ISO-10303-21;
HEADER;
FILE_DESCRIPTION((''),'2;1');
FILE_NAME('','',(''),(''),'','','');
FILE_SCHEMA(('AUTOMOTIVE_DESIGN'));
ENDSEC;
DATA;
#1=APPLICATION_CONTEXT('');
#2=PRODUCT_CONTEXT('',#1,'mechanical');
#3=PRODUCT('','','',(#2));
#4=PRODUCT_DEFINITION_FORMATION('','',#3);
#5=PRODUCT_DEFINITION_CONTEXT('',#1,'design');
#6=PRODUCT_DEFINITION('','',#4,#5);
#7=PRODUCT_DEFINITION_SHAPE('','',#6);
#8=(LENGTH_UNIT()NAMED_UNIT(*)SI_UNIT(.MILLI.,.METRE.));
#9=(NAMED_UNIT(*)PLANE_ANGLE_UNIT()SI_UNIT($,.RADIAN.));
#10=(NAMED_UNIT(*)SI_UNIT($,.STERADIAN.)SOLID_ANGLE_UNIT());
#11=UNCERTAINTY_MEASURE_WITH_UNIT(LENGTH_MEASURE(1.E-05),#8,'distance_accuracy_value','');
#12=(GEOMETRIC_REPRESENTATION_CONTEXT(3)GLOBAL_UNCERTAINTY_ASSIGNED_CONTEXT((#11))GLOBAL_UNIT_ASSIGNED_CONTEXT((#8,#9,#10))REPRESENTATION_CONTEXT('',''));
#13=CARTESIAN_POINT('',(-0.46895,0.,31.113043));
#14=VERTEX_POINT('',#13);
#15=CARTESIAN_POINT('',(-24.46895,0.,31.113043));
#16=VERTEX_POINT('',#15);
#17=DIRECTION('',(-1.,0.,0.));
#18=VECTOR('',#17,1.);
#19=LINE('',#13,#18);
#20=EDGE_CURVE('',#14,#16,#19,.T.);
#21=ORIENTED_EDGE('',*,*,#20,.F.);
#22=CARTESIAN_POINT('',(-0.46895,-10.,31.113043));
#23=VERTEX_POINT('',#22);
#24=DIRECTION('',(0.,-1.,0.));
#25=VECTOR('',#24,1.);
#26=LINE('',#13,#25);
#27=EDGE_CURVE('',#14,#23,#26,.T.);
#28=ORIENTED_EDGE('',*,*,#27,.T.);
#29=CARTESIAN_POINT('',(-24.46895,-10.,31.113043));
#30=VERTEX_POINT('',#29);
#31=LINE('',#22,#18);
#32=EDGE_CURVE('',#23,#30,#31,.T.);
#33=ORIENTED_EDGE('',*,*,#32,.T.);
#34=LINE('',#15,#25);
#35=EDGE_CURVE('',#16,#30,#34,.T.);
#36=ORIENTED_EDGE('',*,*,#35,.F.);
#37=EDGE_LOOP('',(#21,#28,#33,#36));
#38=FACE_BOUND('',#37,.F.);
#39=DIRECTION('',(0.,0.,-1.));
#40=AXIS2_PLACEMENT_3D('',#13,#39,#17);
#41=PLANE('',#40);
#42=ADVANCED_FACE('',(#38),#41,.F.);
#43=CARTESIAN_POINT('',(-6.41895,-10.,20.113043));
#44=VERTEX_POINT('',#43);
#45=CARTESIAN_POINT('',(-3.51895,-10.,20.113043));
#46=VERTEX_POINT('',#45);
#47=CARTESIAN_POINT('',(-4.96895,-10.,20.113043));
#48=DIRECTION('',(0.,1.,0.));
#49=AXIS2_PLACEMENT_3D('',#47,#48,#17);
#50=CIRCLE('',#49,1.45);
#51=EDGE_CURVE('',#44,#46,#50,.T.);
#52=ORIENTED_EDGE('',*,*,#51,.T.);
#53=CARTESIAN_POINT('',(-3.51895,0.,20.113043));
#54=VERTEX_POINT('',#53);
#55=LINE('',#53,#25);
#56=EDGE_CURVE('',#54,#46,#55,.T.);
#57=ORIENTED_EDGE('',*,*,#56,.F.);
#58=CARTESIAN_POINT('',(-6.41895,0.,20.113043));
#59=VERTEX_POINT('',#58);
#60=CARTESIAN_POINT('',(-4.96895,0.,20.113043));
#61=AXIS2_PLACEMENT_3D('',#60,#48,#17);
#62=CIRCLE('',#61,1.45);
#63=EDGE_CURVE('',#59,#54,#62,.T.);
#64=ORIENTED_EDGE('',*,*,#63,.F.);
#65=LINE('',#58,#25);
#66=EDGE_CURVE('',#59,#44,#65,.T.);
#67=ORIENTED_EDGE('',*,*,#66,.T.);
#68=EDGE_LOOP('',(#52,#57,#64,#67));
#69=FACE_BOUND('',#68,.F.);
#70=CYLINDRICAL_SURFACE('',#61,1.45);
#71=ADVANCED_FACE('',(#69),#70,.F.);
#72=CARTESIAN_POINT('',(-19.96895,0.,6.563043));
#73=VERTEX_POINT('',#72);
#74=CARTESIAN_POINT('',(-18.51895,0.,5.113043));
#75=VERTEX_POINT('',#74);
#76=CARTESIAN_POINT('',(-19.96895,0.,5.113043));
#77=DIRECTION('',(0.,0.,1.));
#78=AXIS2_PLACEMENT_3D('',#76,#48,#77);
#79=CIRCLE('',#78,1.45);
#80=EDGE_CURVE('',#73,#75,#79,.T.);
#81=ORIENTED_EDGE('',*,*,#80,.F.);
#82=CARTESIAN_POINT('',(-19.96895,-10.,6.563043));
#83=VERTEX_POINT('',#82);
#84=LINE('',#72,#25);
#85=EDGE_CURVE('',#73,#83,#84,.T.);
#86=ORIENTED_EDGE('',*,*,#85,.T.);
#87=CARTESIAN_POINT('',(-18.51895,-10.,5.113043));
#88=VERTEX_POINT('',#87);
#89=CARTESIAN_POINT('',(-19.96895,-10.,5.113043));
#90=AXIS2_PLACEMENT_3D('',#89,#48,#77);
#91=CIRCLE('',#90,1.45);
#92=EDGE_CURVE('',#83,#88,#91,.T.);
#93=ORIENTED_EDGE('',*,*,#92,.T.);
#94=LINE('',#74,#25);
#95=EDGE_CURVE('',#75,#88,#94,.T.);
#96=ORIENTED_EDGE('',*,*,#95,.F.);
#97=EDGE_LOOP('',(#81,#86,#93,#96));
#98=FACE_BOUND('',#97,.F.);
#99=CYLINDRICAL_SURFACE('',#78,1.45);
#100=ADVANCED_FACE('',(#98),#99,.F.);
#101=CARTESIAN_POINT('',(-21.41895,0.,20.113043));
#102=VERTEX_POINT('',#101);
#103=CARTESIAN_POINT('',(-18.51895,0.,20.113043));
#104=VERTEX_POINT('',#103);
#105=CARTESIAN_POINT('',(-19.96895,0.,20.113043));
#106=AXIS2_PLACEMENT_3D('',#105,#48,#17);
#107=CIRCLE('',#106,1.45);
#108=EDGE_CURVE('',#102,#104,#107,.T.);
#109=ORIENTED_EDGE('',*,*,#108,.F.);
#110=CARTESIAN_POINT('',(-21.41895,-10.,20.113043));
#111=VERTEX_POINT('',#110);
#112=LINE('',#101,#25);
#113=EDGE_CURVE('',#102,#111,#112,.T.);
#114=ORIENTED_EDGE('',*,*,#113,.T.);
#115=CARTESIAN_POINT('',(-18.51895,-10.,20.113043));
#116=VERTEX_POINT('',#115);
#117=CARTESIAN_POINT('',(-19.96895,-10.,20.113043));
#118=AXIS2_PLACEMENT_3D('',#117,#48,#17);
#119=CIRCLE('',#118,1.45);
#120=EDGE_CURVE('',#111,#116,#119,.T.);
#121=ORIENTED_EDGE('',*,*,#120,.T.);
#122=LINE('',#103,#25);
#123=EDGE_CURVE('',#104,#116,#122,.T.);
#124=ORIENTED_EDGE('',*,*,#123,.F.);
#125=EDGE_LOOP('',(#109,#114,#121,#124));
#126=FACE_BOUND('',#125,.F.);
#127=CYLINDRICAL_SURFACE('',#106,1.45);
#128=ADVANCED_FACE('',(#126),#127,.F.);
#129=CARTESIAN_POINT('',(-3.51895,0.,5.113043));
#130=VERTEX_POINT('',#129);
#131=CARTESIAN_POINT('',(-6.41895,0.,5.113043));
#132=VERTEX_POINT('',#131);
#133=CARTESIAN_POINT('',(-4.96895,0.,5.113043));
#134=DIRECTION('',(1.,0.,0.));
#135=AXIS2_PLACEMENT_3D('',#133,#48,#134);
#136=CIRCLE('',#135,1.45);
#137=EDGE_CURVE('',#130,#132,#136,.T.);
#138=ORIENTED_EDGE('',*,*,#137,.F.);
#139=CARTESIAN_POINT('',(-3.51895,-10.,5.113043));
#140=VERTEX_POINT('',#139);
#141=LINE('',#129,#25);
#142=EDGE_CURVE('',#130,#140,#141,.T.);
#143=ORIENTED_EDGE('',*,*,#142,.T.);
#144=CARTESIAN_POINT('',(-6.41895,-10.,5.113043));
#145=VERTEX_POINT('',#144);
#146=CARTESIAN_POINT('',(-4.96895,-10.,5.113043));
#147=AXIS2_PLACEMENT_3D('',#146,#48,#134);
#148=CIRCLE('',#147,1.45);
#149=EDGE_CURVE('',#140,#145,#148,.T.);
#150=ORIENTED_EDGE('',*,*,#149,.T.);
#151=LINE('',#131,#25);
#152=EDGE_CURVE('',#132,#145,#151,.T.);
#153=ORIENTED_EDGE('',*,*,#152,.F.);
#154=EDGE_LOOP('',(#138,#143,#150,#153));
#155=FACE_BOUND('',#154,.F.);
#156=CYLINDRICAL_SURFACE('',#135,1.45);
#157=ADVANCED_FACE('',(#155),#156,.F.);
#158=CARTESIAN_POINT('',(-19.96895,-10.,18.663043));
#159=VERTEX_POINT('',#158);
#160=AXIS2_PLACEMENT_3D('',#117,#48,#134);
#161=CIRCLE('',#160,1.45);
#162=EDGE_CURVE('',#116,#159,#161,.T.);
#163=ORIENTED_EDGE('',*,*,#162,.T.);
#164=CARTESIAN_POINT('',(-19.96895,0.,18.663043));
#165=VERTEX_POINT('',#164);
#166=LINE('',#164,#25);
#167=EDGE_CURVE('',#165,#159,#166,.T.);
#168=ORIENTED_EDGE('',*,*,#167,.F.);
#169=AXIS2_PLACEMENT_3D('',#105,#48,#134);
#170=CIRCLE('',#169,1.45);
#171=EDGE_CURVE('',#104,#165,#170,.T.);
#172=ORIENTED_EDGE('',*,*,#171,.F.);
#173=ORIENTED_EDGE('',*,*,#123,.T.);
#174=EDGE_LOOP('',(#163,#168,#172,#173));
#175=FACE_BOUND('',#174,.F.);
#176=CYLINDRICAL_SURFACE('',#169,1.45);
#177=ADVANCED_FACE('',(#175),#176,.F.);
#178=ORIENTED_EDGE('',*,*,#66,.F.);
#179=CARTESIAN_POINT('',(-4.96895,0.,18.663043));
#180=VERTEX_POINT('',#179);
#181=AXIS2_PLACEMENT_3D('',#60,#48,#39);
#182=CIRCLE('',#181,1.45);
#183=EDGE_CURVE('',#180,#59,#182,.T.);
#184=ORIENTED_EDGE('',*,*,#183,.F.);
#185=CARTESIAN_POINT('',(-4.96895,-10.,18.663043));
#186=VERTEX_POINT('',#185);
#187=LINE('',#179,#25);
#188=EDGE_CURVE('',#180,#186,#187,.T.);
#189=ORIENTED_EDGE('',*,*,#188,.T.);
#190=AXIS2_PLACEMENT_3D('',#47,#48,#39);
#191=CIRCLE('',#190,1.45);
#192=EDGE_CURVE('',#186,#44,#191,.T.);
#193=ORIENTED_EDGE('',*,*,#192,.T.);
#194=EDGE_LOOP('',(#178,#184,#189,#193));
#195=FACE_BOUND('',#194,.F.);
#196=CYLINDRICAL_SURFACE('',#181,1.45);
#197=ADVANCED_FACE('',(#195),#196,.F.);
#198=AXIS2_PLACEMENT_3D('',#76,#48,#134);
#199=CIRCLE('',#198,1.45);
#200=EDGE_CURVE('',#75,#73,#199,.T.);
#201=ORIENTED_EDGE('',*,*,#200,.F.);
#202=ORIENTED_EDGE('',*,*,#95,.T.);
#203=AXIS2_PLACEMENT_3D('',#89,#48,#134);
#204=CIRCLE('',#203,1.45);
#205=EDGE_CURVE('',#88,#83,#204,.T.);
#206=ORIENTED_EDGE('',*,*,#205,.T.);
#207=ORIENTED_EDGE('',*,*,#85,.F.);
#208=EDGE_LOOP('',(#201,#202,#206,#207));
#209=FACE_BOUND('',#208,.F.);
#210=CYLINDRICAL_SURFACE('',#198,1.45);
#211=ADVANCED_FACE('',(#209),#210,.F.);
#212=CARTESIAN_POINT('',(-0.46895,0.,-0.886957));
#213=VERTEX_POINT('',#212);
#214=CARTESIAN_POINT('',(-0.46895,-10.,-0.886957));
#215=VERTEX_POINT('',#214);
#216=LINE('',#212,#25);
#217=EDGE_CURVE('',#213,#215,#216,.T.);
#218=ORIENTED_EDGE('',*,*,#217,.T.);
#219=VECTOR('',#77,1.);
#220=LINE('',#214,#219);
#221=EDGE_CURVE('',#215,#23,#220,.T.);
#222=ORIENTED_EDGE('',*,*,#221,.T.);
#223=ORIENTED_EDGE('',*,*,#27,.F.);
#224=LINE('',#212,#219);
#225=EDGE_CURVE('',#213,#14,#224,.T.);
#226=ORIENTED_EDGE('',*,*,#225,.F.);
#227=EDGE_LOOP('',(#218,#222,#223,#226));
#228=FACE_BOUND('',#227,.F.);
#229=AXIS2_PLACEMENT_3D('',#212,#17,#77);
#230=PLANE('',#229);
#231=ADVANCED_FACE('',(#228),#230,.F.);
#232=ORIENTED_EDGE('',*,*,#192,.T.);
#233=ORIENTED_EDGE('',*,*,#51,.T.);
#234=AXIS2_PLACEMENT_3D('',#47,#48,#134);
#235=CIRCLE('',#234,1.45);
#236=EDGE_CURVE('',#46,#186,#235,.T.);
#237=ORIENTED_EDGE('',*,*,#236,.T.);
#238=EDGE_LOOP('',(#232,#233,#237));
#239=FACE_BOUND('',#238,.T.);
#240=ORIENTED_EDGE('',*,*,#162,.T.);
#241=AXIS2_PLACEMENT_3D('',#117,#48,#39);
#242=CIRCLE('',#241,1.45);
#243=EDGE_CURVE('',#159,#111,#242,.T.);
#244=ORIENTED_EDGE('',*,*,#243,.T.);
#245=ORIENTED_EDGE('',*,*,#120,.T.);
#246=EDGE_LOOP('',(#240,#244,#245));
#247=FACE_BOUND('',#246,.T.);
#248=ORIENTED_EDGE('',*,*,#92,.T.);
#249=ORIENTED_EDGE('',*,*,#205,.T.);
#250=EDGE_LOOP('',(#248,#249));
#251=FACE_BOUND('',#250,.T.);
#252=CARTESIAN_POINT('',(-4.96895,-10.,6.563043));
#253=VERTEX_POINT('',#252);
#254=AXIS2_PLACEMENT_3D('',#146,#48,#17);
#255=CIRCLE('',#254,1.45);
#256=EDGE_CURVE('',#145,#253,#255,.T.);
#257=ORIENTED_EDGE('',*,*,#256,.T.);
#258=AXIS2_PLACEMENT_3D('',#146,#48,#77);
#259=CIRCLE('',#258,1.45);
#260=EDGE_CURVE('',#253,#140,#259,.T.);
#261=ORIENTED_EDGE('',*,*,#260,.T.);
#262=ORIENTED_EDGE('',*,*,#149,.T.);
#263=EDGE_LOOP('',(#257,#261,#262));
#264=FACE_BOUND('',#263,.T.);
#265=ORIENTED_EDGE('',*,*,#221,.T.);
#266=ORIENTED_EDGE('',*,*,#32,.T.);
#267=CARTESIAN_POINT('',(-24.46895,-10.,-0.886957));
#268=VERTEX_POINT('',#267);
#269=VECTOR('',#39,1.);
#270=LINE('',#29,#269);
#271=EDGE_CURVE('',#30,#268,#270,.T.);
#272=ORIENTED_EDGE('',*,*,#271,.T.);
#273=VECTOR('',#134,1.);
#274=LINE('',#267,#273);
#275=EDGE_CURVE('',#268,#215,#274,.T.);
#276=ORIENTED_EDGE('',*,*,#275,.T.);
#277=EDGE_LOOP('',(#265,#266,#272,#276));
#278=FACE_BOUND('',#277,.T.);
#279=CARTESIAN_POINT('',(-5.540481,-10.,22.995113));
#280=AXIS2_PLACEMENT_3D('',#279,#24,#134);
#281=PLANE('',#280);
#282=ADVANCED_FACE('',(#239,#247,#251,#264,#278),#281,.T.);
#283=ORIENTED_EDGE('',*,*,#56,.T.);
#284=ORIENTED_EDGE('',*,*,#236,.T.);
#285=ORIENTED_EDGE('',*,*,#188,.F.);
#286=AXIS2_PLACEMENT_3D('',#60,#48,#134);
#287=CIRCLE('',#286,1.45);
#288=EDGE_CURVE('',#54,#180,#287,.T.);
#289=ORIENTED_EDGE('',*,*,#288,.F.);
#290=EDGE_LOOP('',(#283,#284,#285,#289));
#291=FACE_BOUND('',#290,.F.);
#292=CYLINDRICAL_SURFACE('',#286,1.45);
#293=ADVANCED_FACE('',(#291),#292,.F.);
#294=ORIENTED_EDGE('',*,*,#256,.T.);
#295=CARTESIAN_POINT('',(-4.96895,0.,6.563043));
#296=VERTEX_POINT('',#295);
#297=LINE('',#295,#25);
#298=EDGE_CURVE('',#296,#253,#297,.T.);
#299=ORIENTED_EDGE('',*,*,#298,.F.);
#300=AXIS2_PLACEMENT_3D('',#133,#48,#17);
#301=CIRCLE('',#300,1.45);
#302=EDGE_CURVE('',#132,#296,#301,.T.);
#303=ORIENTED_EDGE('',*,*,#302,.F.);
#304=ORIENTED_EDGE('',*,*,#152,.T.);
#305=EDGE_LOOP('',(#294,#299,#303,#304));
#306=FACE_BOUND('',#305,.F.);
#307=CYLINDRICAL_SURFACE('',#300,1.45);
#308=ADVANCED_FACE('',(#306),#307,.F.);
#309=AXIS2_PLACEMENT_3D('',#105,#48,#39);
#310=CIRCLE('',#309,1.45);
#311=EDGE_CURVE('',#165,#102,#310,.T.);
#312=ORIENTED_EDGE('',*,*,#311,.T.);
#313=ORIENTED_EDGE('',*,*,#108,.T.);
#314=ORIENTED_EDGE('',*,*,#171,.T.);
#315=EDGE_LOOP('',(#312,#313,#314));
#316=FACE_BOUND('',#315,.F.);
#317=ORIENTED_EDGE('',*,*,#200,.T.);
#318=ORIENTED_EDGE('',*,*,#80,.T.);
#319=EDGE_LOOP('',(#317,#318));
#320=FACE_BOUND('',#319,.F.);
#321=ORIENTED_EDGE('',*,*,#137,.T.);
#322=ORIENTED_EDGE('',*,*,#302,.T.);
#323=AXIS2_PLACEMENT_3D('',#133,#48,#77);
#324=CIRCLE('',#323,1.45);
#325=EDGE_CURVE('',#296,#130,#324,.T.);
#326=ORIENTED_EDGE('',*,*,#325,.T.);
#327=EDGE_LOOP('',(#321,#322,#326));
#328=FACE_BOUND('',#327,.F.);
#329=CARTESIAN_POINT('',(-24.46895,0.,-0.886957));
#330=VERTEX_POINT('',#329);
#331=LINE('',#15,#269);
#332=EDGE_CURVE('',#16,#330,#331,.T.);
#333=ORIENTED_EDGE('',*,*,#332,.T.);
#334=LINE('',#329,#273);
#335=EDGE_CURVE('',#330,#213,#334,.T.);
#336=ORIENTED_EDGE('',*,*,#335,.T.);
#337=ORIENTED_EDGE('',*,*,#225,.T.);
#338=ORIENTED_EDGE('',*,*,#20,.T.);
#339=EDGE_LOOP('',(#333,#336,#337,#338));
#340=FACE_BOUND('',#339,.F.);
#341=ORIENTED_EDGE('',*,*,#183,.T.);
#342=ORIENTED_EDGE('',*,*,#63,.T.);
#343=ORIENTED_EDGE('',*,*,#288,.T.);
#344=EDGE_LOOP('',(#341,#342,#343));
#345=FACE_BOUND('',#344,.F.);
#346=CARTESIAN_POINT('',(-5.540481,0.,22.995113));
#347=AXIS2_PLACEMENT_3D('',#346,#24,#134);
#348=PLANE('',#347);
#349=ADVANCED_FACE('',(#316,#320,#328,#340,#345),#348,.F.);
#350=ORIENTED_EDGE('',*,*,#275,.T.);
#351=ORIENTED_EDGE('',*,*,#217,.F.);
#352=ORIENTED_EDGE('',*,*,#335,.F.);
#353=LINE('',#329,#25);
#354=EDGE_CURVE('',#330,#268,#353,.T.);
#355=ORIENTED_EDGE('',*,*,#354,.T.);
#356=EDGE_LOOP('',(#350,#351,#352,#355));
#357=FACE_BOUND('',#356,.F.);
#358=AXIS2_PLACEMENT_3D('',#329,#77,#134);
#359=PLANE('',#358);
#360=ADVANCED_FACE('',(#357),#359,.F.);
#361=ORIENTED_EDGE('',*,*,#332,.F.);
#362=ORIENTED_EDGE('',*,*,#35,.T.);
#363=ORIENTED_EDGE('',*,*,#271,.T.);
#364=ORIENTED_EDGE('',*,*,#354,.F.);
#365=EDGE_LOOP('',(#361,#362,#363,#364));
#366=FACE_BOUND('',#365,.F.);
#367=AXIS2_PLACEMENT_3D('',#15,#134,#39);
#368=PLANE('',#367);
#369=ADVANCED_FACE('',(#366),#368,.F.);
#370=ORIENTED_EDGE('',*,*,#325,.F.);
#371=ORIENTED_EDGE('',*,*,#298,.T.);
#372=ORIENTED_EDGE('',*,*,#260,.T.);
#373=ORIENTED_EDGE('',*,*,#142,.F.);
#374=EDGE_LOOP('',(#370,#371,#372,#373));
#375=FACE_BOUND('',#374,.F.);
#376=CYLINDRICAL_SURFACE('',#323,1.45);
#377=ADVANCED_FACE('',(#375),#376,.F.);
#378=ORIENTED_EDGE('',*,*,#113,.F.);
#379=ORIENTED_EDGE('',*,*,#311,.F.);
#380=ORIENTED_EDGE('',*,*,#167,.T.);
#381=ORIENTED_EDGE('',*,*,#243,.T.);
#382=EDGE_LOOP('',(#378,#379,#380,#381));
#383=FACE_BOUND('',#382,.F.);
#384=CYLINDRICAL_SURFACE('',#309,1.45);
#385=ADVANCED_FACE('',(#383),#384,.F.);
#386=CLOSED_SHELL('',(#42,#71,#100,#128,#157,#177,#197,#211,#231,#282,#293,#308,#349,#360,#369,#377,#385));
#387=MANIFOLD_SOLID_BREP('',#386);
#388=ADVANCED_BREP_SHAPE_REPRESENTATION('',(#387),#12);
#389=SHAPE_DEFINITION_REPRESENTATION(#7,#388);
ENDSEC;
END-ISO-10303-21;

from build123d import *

# Parameters (mm, degrees)
F1_DEPTH = 10


# Not quite as in the source:
# - a feature names something its author has since deleted; it is built from what else it names


with BuildPart() as f1:
    # F0 (on Front) → F1 (new body)
    with BuildSketch(Plane.XZ):
        with BuildLine():
            Line((-0.4689496755, 31.1130427234), (-12.4689496755, 31.1130427234))
            Line((-12.4689496755, 31.1130427234), (-12.4689496755, 20.1130427234))
            Line((-12.4689496755, 20.1130427234), (-6.4189496755, 20.1130427234))
            ThreePointArc((-6.4189496755, 20.1130427234), (-4.9689496755, 21.5630427234), (-3.5189496755, 20.1130427234))
            ThreePointArc((-3.5189496755, 20.1130427234), (-3.9436448428, 19.0877378907), (-4.9689496755, 18.6630427234))
            Line((-4.9689496755, 18.6630427234), (-4.9689496755, 13.4656252339))
            Line((-4.9689496755, 13.4656252339), (-0.4689496755, 13.4656252339))
            Line((-0.4689496755, 13.4656252339), (-0.4689496755, 31.1130427234))
        make_face()
        with BuildLine():
            Line((-12.4689496755, 31.1130427234), (-24.4689496755, 31.1130427234))
            Line((-24.4689496755, 31.1130427234), (-24.4689496755, 20.1130427234))
            Line((-24.4689496755, 20.1130427234), (-21.4189496755, 20.1130427234))
            ThreePointArc((-21.4189496755, 20.1130427234), (-19.9689496755, 21.5630427234), (-18.5189496755, 20.1130427234))
            Line((-18.5189496755, 20.1130427234), (-12.4689496755, 20.1130427234))
            Line((-12.4689496755, 20.1130427234), (-12.4689496755, 31.1130427234))
        make_face()
        with BuildLine():
            Line((-6.4189496755, 20.1130427234), (-12.4689496755, 20.1130427234))
            Line((-12.4689496755, 20.1130427234), (-18.5189496755, 20.1130427234))
            ThreePointArc((-18.5189496755, 20.1130427234), (-18.9436448428, 19.0877378907), (-19.9689496755, 18.6630427234))
            Line((-19.9689496755, 18.6630427234), (-19.9689496755, 6.5630427234))
            ThreePointArc((-19.9689496755, 6.5630427234), (-18.9436448428, 6.1383475561), (-18.5189496755, 5.1130427234))
            Line((-18.5189496755, 5.1130427234), (-6.4189496755, 5.1130427234))
            ThreePointArc((-6.4189496755, 5.1130427234), (-5.9942545082, 6.1383475561), (-4.9689496755, 6.5630427234))
            Line((-4.9689496755, 6.5630427234), (-4.9689496755, 13.4656252339))
            Line((-4.9689496755, 13.4656252339), (-4.9689496755, 18.6630427234))
            ThreePointArc((-4.9689496755, 18.6630427234), (-5.9942545082, 19.0877378907), (-6.4189496755, 20.1130427234))
        make_face()
        with BuildLine():
            Line((-21.4189496755, 20.1130427234), (-24.4689496755, 20.1130427234))
            Line((-24.4689496755, 20.1130427234), (-24.4689496755, -0.8869572766))
            Line((-24.4689496755, -0.8869572766), (-0.4689496755, -0.8869572766))
            Line((-0.4689496755, -0.8869572766), (-0.4689496755, 13.4656252339))
            Line((-0.4689496755, 13.4656252339), (-4.9689496755, 13.4656252339))
            Line((-4.9689496755, 13.4656252339), (-4.9689496755, 6.5630427234))
            ThreePointArc((-4.9689496755, 6.5630427234), (-3.9436448428, 6.1383475561), (-3.5189496755, 5.1130427234))
            ThreePointArc((-3.5189496755, 5.1130427234), (-4.9689496755, 3.6630427234), (-6.4189496755, 5.1130427234))
            Line((-6.4189496755, 5.1130427234), (-18.5189496755, 5.1130427234))
            ThreePointArc((-18.5189496755, 5.1130427234), (-20.9942545082, 4.0877378907), (-19.9689496755, 6.5630427234))
            Line((-19.9689496755, 6.5630427234), (-19.9689496755, 18.6630427234))
            ThreePointArc((-19.9689496755, 18.6630427234), (-20.9942545082, 19.0877378907), (-21.4189496755, 20.1130427234))
        make_face()
    extrude(amount=F1_DEPTH)


solid = f1.part
